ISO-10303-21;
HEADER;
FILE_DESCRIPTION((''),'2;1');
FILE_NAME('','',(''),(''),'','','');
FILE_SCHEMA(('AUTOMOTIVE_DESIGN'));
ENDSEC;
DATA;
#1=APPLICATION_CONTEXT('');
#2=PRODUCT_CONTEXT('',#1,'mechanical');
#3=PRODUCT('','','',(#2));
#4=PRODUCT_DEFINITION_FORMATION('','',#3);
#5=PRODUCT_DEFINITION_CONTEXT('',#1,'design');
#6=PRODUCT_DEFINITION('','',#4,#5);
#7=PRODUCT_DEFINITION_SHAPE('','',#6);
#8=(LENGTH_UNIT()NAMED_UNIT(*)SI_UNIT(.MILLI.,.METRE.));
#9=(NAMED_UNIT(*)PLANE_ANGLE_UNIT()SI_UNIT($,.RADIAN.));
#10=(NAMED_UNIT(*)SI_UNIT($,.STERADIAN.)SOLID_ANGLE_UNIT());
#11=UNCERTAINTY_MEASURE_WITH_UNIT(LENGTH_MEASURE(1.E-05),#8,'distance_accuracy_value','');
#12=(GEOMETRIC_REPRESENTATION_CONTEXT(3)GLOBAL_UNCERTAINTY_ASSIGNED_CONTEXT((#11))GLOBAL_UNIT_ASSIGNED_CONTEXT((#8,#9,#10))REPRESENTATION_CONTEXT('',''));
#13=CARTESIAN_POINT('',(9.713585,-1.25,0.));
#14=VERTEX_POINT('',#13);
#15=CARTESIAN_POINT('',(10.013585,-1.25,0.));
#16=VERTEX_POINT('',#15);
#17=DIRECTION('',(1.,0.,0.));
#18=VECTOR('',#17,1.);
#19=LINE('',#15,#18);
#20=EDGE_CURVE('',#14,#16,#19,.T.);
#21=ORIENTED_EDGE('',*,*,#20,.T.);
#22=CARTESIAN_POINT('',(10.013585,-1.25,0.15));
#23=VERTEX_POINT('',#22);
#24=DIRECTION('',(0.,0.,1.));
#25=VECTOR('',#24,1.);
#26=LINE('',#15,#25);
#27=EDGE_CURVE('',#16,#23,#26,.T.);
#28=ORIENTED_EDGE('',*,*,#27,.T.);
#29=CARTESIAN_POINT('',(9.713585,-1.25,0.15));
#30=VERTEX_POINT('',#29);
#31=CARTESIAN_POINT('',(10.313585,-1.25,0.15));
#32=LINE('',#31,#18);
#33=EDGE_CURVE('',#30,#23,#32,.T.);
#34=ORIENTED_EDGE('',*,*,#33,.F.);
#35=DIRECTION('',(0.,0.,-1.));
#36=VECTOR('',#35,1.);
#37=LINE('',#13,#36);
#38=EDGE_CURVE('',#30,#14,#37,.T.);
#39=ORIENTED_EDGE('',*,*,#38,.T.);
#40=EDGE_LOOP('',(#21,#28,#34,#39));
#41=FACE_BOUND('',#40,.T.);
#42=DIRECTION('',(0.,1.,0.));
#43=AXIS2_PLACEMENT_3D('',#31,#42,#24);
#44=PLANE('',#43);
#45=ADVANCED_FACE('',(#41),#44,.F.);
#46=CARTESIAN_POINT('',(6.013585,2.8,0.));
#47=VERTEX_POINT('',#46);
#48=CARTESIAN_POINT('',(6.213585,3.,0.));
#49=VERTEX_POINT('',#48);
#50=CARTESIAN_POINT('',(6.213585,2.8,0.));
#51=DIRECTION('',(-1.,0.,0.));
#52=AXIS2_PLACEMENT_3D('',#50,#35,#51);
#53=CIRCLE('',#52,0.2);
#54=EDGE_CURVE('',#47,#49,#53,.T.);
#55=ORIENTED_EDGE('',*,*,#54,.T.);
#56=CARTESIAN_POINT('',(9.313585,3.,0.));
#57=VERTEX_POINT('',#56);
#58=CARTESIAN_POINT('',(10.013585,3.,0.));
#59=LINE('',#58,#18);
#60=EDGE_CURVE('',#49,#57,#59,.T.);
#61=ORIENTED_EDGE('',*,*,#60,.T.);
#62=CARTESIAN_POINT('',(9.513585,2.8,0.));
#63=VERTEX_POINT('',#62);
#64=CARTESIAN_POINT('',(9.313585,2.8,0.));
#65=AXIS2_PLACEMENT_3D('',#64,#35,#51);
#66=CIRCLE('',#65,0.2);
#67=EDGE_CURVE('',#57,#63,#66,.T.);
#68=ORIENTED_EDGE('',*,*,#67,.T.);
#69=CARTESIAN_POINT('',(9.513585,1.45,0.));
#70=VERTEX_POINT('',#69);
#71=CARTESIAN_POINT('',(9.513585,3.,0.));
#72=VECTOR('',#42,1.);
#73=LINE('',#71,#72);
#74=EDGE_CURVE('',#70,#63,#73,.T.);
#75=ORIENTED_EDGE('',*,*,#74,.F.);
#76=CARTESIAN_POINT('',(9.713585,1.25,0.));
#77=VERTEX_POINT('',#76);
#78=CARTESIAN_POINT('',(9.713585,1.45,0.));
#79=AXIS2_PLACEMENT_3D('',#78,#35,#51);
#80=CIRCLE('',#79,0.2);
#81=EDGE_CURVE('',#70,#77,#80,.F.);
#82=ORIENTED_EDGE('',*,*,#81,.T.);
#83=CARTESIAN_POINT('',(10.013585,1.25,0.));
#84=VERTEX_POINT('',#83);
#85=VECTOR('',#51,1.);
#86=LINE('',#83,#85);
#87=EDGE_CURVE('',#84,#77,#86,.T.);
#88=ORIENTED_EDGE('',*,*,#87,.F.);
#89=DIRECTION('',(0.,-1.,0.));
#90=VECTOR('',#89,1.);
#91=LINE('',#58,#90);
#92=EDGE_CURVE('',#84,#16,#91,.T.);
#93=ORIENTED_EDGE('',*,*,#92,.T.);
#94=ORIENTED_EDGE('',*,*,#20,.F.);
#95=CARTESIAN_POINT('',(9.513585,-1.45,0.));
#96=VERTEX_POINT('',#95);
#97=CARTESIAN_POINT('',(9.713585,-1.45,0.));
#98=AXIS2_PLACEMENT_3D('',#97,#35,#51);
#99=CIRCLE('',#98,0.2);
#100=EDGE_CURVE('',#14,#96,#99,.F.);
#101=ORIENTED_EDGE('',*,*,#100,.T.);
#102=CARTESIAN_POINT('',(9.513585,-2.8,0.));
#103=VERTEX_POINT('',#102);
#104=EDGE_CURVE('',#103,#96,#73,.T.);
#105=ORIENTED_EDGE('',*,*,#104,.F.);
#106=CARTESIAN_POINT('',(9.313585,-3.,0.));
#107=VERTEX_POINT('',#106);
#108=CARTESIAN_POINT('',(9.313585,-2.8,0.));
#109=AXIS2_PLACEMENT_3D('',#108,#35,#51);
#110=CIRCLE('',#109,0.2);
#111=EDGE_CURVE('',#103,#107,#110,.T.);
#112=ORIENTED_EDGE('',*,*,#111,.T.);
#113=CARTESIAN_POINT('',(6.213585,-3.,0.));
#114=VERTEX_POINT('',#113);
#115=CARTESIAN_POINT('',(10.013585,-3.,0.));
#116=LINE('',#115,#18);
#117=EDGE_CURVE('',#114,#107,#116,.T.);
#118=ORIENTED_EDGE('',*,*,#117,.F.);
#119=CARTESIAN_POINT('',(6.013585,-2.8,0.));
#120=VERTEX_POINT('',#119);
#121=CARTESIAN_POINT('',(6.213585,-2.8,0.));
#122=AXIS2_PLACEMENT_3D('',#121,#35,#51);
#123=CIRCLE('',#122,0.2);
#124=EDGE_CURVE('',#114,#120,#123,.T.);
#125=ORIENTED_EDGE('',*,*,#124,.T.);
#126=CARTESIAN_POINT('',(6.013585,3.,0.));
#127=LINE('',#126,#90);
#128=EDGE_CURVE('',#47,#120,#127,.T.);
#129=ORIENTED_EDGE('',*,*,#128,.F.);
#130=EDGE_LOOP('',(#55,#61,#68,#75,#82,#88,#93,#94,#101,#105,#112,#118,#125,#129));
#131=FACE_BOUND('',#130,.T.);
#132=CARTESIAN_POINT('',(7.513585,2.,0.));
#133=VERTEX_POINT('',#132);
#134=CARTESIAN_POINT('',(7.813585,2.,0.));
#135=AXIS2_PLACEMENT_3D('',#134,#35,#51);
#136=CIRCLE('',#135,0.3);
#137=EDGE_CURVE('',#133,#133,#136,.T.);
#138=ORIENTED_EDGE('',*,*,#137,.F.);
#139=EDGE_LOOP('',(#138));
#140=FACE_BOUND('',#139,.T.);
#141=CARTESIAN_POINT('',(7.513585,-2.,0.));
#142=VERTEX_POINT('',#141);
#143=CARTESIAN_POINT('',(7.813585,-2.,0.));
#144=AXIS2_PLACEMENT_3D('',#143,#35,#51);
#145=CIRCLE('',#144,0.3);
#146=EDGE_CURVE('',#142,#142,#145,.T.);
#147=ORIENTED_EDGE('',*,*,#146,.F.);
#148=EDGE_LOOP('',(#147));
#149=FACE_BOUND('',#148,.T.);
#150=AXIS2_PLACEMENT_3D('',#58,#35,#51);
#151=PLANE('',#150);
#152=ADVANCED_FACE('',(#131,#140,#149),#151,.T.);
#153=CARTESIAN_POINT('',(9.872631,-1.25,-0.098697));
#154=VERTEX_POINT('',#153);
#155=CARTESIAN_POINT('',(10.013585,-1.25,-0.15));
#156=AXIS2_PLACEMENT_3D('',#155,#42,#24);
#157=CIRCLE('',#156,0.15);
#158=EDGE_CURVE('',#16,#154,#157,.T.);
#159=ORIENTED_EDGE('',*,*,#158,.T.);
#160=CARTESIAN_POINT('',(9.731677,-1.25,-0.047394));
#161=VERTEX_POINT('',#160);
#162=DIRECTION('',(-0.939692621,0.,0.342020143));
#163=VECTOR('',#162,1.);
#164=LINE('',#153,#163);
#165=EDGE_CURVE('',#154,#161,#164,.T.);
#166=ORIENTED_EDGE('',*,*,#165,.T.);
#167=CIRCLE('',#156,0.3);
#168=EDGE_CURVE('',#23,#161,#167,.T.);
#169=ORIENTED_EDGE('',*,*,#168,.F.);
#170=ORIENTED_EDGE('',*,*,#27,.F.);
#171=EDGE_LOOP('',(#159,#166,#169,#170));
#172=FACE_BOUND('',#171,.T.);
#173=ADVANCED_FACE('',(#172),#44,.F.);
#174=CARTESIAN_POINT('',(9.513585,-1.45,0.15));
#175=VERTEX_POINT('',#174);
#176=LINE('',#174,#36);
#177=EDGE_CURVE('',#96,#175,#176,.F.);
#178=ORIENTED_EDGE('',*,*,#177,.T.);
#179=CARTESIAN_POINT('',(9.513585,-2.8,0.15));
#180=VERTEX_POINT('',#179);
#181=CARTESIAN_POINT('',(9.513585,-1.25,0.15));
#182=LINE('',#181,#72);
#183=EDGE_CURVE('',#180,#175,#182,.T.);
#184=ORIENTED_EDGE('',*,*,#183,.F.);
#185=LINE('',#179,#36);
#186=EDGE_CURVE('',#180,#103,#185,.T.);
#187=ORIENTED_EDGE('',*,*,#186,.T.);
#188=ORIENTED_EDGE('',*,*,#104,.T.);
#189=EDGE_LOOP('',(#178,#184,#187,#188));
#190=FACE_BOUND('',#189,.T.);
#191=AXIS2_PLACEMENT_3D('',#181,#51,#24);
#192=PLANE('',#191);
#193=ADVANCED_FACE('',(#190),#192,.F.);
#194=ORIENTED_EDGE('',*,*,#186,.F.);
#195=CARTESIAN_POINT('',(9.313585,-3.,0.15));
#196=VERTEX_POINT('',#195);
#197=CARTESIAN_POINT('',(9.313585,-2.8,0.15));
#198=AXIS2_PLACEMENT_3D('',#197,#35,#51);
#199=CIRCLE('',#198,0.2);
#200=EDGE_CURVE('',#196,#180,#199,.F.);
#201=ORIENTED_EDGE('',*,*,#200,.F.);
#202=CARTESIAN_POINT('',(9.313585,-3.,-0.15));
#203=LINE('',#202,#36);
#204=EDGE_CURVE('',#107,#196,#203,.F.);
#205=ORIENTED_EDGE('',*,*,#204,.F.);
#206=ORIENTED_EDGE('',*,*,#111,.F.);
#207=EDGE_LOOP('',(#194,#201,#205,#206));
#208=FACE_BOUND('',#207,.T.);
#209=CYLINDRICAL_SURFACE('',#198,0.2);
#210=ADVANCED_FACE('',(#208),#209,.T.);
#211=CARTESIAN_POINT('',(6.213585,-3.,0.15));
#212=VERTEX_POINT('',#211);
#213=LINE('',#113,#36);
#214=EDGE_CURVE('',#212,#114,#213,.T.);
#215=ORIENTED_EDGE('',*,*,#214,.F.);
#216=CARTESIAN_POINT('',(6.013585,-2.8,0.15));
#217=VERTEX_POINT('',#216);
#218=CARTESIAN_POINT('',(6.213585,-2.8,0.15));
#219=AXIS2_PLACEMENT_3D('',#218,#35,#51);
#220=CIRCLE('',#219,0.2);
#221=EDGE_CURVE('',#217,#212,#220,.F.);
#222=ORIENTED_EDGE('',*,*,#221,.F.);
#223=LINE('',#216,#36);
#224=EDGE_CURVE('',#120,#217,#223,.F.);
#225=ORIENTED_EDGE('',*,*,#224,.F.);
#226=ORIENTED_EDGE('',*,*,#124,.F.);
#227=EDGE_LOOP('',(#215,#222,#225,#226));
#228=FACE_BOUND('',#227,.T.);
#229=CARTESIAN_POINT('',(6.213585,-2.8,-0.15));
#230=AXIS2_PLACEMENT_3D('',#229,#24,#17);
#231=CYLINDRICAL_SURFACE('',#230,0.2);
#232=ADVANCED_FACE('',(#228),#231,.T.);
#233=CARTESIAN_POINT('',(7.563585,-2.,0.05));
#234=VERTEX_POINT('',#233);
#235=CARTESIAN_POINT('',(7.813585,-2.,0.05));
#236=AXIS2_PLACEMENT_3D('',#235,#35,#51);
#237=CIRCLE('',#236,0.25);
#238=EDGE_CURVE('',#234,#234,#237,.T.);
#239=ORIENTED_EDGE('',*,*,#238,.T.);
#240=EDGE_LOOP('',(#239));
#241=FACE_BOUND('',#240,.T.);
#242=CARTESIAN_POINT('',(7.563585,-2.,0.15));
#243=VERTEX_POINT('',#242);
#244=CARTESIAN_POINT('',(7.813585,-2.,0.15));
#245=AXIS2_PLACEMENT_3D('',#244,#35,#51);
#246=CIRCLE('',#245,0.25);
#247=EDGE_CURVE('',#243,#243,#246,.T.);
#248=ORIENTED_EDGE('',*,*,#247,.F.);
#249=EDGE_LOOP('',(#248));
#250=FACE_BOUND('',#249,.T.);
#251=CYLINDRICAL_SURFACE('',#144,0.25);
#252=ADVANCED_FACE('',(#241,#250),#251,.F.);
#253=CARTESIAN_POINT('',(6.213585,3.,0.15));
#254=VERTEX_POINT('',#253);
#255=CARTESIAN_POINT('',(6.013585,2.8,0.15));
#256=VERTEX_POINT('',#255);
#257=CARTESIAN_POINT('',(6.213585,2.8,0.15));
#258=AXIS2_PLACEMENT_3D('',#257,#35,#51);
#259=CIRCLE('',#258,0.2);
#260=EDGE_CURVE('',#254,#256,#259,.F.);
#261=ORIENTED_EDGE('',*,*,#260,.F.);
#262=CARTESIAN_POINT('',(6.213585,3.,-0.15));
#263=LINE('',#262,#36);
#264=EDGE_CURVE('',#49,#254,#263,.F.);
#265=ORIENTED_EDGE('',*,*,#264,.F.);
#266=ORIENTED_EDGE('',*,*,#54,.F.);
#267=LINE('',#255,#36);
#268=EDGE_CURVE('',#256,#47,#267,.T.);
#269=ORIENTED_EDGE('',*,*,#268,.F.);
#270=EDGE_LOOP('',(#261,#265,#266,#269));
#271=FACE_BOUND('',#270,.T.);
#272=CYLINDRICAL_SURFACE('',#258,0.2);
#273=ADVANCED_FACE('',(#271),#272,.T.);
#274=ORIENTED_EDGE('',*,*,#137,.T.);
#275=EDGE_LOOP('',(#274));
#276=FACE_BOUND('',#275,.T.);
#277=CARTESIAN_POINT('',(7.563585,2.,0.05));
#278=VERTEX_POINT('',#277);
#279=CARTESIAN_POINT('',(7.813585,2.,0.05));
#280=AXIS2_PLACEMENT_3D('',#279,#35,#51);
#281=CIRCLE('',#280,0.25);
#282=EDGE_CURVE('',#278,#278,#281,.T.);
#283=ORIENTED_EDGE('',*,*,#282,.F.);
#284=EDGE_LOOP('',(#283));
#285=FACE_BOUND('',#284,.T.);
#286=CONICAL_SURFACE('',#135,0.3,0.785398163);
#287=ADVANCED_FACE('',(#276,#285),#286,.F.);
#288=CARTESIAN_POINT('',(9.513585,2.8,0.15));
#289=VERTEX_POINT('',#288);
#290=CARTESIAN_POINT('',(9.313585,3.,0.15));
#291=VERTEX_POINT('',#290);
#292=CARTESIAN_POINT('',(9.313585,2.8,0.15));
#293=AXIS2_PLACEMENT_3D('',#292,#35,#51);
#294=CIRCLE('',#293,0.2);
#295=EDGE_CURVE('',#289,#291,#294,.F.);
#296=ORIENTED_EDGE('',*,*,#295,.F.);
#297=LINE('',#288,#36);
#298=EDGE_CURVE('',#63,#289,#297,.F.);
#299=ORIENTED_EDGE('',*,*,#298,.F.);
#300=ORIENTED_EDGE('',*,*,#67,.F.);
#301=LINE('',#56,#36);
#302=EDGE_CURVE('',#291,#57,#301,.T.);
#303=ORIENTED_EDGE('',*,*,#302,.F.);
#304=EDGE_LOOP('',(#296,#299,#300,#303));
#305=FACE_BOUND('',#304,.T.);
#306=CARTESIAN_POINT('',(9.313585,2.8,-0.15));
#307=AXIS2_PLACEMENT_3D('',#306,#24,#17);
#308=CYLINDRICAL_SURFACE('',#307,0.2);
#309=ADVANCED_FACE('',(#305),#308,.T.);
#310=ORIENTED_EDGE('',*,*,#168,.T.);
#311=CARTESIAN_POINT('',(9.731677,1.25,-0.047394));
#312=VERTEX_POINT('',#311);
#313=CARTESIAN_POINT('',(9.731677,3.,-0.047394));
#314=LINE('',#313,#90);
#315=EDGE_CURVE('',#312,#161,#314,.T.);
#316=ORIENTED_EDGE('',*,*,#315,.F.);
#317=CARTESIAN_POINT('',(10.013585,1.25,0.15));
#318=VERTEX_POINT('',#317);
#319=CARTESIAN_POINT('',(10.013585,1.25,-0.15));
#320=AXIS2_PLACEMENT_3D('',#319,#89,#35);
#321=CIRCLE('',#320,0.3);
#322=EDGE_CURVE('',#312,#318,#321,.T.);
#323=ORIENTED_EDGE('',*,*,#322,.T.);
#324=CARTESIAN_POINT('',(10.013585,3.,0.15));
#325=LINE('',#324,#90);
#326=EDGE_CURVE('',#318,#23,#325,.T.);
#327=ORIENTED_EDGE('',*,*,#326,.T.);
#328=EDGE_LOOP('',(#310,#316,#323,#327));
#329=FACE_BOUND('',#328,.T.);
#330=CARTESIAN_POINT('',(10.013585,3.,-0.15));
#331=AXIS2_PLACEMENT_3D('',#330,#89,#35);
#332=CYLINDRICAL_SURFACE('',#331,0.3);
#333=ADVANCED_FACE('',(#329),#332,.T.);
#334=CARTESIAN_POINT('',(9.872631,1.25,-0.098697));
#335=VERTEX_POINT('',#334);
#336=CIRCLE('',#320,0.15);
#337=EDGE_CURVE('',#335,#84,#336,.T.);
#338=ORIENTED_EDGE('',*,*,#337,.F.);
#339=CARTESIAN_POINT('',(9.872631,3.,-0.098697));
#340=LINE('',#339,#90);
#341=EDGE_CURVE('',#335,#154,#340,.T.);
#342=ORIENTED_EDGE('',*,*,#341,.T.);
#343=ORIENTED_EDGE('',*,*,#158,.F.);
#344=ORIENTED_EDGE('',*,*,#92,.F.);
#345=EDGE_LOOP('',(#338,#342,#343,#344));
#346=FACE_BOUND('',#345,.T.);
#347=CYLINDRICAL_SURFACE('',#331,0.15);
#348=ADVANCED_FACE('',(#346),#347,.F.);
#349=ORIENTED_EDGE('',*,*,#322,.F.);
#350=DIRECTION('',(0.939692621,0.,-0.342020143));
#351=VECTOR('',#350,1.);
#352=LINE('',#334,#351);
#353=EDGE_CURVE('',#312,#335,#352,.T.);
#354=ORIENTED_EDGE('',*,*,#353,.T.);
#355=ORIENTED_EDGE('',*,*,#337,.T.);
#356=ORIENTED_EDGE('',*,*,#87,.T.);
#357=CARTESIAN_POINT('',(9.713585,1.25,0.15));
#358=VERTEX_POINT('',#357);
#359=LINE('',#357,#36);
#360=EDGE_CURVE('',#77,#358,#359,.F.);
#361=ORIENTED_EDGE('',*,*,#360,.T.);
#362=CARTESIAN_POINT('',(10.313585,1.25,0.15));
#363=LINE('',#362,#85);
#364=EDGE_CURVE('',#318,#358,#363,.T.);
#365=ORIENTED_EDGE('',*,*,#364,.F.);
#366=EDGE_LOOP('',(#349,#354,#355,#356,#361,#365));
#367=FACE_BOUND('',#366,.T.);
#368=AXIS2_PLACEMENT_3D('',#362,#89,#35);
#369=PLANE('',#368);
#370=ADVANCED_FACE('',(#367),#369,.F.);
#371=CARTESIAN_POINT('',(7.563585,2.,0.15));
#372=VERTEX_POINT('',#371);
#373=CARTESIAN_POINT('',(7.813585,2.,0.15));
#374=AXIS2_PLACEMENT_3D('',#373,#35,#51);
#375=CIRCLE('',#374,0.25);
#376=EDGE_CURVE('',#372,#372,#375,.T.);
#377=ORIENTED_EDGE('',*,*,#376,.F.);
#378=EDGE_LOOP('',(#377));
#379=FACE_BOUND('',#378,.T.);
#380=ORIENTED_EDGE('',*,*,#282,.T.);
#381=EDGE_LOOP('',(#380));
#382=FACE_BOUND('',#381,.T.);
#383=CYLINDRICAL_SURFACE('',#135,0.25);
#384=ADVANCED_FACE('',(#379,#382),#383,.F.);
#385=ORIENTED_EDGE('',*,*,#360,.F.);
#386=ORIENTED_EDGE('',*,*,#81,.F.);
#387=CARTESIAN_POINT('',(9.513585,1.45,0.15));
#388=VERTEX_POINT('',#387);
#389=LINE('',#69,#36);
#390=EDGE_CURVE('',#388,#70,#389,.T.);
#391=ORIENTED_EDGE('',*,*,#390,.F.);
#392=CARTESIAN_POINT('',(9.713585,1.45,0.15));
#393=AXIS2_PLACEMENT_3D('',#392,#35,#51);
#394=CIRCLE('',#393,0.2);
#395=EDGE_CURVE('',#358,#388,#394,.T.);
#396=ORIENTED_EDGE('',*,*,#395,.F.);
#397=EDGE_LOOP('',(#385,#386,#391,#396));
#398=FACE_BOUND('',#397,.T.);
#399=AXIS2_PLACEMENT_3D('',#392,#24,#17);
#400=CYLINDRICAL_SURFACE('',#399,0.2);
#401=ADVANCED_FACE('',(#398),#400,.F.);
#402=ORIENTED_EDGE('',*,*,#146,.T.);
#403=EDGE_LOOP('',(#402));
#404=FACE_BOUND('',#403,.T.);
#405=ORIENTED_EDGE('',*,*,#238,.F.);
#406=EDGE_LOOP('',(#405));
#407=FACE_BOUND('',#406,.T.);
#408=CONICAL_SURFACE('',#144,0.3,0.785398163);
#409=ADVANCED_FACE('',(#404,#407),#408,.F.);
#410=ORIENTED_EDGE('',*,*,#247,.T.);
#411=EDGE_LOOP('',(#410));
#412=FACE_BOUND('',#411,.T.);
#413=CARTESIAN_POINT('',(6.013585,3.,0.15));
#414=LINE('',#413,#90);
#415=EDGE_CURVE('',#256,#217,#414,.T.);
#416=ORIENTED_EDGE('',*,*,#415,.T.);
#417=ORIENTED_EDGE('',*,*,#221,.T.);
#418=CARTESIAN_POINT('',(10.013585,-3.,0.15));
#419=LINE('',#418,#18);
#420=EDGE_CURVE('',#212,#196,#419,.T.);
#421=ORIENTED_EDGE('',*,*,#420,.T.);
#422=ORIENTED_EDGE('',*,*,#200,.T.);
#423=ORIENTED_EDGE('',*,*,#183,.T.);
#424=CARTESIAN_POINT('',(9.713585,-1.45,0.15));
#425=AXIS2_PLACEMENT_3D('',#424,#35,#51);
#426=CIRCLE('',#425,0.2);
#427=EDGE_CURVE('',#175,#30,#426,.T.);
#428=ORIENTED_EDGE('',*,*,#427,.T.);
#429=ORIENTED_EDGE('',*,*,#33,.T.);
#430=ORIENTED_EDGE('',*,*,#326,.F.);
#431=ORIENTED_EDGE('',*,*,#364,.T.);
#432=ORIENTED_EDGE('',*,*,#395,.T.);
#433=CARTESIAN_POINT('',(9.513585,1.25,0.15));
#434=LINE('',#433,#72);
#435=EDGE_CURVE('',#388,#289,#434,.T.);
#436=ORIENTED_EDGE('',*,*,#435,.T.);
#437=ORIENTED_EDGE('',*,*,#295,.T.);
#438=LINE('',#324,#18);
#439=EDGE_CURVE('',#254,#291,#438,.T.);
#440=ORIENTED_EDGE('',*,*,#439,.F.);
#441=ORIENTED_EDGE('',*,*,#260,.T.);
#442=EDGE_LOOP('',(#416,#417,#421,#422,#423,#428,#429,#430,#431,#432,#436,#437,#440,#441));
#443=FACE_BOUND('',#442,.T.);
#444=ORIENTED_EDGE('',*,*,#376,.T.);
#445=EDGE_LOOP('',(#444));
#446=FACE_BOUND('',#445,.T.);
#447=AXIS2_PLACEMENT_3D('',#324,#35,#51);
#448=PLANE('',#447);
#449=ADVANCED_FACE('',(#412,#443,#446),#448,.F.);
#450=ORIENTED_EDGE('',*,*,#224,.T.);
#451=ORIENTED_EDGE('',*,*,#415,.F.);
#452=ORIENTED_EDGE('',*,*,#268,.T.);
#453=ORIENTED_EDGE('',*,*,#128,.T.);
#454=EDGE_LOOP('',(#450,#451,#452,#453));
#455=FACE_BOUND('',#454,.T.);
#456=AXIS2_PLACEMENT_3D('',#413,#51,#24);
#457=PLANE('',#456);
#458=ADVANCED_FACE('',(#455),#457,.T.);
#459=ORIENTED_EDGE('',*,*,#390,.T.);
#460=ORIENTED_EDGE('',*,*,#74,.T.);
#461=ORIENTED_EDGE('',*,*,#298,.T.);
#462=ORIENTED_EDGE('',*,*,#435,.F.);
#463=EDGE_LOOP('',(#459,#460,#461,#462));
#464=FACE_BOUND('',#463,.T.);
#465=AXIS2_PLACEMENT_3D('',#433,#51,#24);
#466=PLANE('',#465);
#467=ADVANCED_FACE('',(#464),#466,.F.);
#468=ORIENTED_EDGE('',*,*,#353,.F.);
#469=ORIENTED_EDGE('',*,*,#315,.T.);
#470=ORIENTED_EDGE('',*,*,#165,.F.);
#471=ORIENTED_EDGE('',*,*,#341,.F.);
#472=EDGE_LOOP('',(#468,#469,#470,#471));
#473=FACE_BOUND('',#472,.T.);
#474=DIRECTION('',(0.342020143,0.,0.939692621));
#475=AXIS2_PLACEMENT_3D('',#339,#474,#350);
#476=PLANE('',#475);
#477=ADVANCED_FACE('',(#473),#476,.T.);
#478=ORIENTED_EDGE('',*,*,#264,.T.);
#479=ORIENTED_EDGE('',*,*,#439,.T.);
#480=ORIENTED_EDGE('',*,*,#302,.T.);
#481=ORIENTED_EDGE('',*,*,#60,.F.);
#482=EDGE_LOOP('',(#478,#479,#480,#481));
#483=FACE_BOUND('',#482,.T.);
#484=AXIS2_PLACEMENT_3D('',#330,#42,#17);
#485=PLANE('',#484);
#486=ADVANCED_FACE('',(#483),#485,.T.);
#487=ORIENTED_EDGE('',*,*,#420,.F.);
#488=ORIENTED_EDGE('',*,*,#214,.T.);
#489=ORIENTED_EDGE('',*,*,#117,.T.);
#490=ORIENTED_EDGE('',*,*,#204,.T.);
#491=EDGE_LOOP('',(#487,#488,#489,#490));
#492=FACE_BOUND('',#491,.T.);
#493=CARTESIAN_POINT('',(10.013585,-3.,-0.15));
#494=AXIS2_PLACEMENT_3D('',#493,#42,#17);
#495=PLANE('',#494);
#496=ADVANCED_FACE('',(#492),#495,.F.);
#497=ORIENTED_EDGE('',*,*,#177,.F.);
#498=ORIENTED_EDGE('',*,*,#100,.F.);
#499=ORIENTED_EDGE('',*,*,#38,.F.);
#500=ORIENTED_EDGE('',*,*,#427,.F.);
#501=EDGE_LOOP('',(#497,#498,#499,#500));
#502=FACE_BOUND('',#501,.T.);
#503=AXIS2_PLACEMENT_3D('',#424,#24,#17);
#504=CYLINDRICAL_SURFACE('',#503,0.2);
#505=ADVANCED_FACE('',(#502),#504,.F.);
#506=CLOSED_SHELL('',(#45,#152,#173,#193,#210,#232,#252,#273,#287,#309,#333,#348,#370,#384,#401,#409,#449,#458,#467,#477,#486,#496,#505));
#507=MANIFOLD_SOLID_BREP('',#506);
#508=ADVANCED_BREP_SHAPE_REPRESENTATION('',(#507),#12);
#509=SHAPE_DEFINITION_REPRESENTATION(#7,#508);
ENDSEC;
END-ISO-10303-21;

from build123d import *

# Parameters (mm, degrees)
BASE_FLANGE1_DEPTH                             = 3
CUT_EXTRUDE1_DEPTH                             = 11.75046698
CUT_EXTRUDE1_DEPTH_BACK                        = 11.75046698
SKETCH10_W                                     = 0.8
SKETCH10_H                                     = 1.75
FILLET1_R                                      = 0.2
CSK_FOR_M3_FLAT_HEAD_MACHINE_SCREW1_AT_2_COUNT = 2
CSK_FOR_M3_FLAT_HEAD_MACHINE_SCREW1_AT_2_PITCH = 4


# Sheet-metal steps are written as plain solids
with BuildPart() as part:
    # Sketch5 → Base-Flange1 (new, symmetric)
    with BuildSketch(Plane(origin=(0, 0, 0), x_dir=(1, 0, 0), z_dir=(0, 1, 0))):
        with BuildLine():
            ThreePointArc((9.872631336, 0.098696979), (10.099621695, 0.272872807), (10.013585229, 0))
            Line((10.013585229, 0), (6.013585229, 0))
            Line((6.013585229, 0), (6.013585229, -0.15))
            Line((6.013585229, -0.15), (10.013585229, -0.15))
            ThreePointArc((10.013585229, -0.15), (10.18565816, 0.395745613), (9.731677443, 0.047393957))
            Line((9.731677443, 0.047393957), (9.872631336, 0.098696979))
        make_face()
    extrude(amount=BASE_FLANGE1_DEPTH, both=True)

    # Sketch10 → Cut-Extrude1 (cut, two sides: drawn at the far end of the back side and taken through both)
    with BuildSketch(Plane(origin=(0, 0, 0), x_dir=(-1, 0, 0), z_dir=(0, 0, -1)).offset(-CUT_EXTRUDE1_DEPTH_BACK)):
        with Locations((-9.913585229, 2.125)):
            Rectangle(SKETCH10_W, SKETCH10_H)
        with Locations((-9.913585229, -2.125)):
            Rectangle(SKETCH10_W, SKETCH10_H)
    extrude(amount=CUT_EXTRUDE1_DEPTH + CUT_EXTRUDE1_DEPTH_BACK, mode=Mode.SUBTRACT)

    # Fillet1
    fillet1_edges = [part.edges().sort_by_distance(p)[0] for p in [
        (6.013585229, 3, 0.075),
        (9.513585229, 1.25, 0.075),
        (9.513585229, 3, 0.075),
        (6.013585229, -3, 0.075),
        (9.513585229, -3, 0.075),
        (9.513585229, -1.25, 0.075),
    ]]
    fillet(fillet1_edges, radius=FILLET1_R)

    # Sketch13 → CSK for M3 Flat Head Machine Screw1 (revolve, cut)
    with BuildSketch(Plane(origin=(7.813585229, 2, 0), x_dir=(0, 1, 0), z_dir=(1, 0, 0))):
        Polygon((0, 0), (0, 0.15), (0.25, 0.15), (0.25, 0.05), (0.3, 0), align=None)
    csk_for_m3_flat_head_machine_screw1 = revolve(axis=Axis((7.813585229, 2, -6.35), (0, 0, 1)), mode=Mode.SUBTRACT)

    # CSK for M3 Flat Head Machine Screw1 at 2: CSK for M3 Flat Head Machine Screw1 ×2
    with Locations(*[(0, -i * CSK_FOR_M3_FLAT_HEAD_MACHINE_SCREW1_AT_2_PITCH, 0) for i in range(1, CSK_FOR_M3_FLAT_HEAD_MACHINE_SCREW1_AT_2_COUNT)]):
        add(csk_for_m3_flat_head_machine_screw1, mode=Mode.SUBTRACT)


solid = part.part
